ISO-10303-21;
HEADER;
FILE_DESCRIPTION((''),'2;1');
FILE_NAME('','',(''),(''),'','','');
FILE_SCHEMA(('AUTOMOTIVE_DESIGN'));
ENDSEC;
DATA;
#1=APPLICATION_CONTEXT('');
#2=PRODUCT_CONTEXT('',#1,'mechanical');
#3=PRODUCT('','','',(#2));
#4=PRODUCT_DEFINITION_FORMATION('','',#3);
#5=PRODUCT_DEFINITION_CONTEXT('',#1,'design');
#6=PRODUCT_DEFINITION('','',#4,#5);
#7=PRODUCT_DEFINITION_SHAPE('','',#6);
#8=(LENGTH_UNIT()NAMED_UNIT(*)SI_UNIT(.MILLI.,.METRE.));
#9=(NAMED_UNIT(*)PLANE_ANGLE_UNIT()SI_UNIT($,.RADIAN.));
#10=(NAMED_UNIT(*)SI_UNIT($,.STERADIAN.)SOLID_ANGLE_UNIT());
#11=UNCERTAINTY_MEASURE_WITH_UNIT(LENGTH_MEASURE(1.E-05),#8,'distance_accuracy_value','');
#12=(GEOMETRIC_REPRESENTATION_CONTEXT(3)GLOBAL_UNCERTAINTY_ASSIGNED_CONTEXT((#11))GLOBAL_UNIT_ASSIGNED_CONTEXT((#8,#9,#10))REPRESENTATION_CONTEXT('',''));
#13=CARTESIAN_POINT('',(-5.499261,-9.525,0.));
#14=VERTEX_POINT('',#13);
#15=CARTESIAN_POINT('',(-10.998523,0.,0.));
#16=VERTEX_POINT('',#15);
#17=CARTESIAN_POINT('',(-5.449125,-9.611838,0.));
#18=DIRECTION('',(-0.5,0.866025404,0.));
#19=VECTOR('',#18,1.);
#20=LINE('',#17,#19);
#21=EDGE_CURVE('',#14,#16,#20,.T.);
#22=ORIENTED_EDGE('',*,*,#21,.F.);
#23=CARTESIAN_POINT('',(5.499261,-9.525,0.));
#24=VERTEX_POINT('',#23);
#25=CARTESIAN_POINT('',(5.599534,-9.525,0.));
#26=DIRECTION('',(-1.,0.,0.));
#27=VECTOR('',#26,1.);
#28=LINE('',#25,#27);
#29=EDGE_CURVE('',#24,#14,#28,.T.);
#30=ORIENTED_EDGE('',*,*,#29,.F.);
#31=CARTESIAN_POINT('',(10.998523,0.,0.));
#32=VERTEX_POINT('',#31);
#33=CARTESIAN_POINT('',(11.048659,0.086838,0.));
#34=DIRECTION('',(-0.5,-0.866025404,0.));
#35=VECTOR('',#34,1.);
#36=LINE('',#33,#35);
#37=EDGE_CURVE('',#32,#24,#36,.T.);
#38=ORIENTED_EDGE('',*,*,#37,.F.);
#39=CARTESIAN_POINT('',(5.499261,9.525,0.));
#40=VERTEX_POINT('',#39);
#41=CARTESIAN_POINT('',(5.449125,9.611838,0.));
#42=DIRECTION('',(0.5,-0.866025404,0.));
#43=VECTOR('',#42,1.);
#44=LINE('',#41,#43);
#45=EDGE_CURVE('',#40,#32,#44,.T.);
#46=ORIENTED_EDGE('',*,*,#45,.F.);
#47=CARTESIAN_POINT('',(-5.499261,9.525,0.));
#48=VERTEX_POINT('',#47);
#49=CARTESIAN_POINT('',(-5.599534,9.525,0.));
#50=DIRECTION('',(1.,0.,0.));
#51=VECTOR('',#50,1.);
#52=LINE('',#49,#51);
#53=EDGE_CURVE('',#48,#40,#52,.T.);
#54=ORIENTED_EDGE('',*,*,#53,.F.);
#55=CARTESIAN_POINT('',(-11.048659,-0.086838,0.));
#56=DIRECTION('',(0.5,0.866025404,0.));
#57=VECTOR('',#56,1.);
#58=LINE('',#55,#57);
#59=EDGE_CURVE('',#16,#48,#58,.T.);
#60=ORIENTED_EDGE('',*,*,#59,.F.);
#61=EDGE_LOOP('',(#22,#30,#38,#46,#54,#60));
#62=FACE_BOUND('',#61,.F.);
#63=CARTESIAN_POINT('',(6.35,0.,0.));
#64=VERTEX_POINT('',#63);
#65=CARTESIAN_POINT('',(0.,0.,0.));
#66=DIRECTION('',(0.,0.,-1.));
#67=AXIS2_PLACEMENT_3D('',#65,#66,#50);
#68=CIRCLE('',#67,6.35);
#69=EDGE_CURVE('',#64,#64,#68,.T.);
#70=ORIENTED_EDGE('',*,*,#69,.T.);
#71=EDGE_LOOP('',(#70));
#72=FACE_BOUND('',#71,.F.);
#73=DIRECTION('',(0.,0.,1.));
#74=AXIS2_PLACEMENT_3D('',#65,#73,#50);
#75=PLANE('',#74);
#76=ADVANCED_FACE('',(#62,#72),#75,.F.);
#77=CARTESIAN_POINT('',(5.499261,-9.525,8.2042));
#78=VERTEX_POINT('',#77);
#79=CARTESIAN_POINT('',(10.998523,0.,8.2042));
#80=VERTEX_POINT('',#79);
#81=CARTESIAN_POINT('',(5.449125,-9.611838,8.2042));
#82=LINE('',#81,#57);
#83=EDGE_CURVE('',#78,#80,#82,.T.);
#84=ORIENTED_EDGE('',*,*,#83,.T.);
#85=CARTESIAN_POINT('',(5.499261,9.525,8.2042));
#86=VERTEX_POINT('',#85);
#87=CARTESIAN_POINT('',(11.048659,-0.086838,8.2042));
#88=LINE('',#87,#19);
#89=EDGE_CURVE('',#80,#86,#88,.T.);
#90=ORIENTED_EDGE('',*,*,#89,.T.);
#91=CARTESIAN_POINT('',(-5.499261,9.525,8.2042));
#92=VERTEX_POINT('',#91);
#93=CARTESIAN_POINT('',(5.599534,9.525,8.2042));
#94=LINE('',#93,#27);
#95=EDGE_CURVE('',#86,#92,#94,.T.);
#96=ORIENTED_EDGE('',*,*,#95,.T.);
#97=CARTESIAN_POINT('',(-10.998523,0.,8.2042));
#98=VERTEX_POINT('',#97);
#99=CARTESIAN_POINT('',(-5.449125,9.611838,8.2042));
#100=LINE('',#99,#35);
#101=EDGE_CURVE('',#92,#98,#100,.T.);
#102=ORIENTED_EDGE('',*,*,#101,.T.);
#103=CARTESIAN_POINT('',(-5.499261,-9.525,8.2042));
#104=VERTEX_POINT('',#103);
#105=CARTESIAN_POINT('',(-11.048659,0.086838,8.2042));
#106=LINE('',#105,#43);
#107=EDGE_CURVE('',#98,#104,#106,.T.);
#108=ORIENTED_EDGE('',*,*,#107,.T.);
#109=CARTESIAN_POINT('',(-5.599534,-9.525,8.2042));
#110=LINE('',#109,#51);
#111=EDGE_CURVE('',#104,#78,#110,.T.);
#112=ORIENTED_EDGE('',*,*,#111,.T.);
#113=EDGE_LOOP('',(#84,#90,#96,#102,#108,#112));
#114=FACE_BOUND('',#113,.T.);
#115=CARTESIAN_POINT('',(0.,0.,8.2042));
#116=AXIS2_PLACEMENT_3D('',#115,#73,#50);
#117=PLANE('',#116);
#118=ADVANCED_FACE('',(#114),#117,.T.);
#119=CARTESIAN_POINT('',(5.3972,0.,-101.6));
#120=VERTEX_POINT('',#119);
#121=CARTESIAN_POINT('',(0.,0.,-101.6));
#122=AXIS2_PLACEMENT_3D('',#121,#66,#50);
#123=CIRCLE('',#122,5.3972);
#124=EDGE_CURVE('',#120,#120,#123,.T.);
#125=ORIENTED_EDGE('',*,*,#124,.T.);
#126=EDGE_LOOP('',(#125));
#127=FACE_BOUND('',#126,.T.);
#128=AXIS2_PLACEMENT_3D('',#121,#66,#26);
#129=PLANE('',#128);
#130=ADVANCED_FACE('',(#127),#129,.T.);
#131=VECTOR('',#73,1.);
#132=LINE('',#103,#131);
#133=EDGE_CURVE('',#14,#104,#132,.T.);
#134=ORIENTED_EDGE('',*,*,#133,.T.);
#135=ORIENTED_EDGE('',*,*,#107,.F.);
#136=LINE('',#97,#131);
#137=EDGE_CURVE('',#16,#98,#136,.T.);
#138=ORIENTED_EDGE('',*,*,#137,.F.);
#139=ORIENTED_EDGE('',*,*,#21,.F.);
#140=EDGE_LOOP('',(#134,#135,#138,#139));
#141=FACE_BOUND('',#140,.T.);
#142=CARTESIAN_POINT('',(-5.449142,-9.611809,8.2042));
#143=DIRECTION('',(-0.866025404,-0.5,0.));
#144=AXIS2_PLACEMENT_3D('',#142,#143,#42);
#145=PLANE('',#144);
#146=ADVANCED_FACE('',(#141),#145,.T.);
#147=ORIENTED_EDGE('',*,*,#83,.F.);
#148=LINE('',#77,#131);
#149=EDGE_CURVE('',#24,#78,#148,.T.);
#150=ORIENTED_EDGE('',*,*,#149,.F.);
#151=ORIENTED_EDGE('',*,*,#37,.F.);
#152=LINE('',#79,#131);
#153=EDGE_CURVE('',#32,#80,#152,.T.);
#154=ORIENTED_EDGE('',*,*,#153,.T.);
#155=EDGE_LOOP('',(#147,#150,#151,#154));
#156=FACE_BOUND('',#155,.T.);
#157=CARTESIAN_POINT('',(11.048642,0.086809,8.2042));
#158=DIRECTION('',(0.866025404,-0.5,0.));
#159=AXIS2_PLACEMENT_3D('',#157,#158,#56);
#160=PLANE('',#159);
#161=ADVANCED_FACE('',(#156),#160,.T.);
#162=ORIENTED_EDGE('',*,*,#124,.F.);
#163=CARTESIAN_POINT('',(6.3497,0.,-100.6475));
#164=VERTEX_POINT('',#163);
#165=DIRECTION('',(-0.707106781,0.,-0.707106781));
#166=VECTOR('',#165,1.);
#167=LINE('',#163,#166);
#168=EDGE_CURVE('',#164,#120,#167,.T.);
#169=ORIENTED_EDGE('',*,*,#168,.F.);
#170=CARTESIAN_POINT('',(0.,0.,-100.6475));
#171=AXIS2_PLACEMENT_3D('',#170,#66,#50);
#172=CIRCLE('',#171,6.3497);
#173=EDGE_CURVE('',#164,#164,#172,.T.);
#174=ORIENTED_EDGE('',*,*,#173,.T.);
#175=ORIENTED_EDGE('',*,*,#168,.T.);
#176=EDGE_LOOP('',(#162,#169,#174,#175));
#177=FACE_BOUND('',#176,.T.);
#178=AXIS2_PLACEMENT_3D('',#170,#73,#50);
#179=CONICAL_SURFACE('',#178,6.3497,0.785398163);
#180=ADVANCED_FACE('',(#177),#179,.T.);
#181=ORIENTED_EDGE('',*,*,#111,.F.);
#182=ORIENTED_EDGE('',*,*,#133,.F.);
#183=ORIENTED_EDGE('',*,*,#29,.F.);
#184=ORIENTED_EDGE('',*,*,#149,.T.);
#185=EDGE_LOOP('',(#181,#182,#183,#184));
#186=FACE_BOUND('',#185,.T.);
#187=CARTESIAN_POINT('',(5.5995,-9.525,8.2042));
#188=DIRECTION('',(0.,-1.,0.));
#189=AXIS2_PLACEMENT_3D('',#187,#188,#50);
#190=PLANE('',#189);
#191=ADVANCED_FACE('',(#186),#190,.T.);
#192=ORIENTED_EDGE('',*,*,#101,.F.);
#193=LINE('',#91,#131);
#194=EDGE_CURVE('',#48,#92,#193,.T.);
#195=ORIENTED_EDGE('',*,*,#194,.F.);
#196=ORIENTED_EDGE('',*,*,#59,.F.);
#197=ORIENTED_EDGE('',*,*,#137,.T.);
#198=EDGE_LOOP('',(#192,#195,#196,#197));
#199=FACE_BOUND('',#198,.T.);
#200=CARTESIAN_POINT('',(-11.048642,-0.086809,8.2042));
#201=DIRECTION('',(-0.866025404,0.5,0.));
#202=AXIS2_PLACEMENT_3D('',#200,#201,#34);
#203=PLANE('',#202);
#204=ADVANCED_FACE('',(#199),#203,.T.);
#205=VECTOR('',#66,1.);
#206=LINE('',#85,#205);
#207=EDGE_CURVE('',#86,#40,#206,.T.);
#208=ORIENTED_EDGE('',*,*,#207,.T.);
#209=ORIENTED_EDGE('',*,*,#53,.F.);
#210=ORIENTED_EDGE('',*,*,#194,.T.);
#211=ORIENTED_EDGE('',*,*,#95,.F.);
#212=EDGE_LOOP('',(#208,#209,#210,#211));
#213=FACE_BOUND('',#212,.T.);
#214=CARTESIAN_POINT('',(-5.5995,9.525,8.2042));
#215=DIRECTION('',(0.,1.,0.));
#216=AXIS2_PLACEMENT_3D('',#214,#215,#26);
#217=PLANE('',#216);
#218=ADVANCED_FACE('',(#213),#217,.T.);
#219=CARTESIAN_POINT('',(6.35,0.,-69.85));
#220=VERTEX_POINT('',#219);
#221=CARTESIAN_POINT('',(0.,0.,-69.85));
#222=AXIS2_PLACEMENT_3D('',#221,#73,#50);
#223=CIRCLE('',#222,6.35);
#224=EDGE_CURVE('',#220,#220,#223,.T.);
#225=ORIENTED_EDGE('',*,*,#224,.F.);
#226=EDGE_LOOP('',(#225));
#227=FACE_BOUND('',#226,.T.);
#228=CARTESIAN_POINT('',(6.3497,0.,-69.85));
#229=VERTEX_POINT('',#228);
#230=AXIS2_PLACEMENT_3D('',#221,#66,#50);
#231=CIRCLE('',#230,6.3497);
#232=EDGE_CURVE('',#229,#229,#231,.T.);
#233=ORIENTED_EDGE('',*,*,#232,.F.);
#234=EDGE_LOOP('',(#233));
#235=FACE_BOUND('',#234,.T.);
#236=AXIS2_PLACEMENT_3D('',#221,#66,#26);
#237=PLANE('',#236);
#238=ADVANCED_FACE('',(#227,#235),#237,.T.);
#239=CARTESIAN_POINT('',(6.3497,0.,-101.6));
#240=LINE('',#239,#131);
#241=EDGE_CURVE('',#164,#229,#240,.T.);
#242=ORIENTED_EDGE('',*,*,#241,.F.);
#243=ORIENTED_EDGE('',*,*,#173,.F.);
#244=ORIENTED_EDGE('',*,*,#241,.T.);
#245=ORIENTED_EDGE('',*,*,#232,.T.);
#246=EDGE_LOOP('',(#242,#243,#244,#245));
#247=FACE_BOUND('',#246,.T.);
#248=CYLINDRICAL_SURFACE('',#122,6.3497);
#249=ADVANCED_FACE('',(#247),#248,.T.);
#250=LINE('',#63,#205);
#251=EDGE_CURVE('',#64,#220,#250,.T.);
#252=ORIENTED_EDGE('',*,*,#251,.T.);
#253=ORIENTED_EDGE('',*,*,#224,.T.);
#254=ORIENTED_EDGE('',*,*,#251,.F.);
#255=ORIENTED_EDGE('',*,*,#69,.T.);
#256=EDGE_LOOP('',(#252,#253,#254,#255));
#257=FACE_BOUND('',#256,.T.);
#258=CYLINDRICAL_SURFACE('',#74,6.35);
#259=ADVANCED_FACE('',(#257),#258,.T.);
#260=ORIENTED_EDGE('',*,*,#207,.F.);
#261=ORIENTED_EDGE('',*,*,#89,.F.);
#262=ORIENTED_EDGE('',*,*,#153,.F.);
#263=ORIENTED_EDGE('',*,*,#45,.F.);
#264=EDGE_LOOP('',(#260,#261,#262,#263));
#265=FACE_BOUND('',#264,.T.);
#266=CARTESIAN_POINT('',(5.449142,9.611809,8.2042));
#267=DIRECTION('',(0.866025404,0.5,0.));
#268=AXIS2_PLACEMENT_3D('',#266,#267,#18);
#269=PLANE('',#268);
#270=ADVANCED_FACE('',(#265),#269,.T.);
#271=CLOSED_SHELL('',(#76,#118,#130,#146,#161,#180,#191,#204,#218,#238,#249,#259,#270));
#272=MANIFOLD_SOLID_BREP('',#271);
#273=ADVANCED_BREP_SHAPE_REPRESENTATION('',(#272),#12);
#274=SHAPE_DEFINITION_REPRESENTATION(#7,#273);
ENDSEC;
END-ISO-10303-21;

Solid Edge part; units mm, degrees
sketch "Sketch1" plane through (0, 0, 0) normal (0, 0, 1) x (1, 0, 0)
  circle A0 centre (0, 0) radius 11.049
  dimension "D1" = 22.098
extrude "Protrusion1" add sketch "Sketch1" along normal blind 8.2042
sketch "Sketch2" plane through (0, 0, 0) normal (0, 0, -1) x (1, 0, 0)
  circle A0 centre (0, 0) radius 6.35
extrude "Protrusion2" add sketch "Sketch2" along normal blind 101.6
sketch "Sketch3" plane through (0, 0, -101.6) normal (0, 0, -1) x (1, 0, 0)
  circle A0 centre (0, 0) radius 6.3497
extrude "Cutout1" cut sketch "Sketch3" against normal blind 31.75 flip side to cut
chamfer "Chamfer_1" distance 0.9525 angle 45 1 edges at (-6.3497, 0, -101.6)
sketch "Sketch4" plane through (0, 0, 8.2042) normal (0, 0, 1) x (1, 0, 0)
  line L0 (-5.5995, 9.525) -> (5.5995, 9.525)
  dimension "D1" = 19.05
extrude "Cutout2" cut sketch "Sketch4" against normal up to next material side at (0, 9.575, 8.2042)
pattern_circular "Pattern1" count 6 over 360 about axis through (0, 0, 8.2042) along (0, 0, 1) of "Cutout2"
properties part number "24102123"
